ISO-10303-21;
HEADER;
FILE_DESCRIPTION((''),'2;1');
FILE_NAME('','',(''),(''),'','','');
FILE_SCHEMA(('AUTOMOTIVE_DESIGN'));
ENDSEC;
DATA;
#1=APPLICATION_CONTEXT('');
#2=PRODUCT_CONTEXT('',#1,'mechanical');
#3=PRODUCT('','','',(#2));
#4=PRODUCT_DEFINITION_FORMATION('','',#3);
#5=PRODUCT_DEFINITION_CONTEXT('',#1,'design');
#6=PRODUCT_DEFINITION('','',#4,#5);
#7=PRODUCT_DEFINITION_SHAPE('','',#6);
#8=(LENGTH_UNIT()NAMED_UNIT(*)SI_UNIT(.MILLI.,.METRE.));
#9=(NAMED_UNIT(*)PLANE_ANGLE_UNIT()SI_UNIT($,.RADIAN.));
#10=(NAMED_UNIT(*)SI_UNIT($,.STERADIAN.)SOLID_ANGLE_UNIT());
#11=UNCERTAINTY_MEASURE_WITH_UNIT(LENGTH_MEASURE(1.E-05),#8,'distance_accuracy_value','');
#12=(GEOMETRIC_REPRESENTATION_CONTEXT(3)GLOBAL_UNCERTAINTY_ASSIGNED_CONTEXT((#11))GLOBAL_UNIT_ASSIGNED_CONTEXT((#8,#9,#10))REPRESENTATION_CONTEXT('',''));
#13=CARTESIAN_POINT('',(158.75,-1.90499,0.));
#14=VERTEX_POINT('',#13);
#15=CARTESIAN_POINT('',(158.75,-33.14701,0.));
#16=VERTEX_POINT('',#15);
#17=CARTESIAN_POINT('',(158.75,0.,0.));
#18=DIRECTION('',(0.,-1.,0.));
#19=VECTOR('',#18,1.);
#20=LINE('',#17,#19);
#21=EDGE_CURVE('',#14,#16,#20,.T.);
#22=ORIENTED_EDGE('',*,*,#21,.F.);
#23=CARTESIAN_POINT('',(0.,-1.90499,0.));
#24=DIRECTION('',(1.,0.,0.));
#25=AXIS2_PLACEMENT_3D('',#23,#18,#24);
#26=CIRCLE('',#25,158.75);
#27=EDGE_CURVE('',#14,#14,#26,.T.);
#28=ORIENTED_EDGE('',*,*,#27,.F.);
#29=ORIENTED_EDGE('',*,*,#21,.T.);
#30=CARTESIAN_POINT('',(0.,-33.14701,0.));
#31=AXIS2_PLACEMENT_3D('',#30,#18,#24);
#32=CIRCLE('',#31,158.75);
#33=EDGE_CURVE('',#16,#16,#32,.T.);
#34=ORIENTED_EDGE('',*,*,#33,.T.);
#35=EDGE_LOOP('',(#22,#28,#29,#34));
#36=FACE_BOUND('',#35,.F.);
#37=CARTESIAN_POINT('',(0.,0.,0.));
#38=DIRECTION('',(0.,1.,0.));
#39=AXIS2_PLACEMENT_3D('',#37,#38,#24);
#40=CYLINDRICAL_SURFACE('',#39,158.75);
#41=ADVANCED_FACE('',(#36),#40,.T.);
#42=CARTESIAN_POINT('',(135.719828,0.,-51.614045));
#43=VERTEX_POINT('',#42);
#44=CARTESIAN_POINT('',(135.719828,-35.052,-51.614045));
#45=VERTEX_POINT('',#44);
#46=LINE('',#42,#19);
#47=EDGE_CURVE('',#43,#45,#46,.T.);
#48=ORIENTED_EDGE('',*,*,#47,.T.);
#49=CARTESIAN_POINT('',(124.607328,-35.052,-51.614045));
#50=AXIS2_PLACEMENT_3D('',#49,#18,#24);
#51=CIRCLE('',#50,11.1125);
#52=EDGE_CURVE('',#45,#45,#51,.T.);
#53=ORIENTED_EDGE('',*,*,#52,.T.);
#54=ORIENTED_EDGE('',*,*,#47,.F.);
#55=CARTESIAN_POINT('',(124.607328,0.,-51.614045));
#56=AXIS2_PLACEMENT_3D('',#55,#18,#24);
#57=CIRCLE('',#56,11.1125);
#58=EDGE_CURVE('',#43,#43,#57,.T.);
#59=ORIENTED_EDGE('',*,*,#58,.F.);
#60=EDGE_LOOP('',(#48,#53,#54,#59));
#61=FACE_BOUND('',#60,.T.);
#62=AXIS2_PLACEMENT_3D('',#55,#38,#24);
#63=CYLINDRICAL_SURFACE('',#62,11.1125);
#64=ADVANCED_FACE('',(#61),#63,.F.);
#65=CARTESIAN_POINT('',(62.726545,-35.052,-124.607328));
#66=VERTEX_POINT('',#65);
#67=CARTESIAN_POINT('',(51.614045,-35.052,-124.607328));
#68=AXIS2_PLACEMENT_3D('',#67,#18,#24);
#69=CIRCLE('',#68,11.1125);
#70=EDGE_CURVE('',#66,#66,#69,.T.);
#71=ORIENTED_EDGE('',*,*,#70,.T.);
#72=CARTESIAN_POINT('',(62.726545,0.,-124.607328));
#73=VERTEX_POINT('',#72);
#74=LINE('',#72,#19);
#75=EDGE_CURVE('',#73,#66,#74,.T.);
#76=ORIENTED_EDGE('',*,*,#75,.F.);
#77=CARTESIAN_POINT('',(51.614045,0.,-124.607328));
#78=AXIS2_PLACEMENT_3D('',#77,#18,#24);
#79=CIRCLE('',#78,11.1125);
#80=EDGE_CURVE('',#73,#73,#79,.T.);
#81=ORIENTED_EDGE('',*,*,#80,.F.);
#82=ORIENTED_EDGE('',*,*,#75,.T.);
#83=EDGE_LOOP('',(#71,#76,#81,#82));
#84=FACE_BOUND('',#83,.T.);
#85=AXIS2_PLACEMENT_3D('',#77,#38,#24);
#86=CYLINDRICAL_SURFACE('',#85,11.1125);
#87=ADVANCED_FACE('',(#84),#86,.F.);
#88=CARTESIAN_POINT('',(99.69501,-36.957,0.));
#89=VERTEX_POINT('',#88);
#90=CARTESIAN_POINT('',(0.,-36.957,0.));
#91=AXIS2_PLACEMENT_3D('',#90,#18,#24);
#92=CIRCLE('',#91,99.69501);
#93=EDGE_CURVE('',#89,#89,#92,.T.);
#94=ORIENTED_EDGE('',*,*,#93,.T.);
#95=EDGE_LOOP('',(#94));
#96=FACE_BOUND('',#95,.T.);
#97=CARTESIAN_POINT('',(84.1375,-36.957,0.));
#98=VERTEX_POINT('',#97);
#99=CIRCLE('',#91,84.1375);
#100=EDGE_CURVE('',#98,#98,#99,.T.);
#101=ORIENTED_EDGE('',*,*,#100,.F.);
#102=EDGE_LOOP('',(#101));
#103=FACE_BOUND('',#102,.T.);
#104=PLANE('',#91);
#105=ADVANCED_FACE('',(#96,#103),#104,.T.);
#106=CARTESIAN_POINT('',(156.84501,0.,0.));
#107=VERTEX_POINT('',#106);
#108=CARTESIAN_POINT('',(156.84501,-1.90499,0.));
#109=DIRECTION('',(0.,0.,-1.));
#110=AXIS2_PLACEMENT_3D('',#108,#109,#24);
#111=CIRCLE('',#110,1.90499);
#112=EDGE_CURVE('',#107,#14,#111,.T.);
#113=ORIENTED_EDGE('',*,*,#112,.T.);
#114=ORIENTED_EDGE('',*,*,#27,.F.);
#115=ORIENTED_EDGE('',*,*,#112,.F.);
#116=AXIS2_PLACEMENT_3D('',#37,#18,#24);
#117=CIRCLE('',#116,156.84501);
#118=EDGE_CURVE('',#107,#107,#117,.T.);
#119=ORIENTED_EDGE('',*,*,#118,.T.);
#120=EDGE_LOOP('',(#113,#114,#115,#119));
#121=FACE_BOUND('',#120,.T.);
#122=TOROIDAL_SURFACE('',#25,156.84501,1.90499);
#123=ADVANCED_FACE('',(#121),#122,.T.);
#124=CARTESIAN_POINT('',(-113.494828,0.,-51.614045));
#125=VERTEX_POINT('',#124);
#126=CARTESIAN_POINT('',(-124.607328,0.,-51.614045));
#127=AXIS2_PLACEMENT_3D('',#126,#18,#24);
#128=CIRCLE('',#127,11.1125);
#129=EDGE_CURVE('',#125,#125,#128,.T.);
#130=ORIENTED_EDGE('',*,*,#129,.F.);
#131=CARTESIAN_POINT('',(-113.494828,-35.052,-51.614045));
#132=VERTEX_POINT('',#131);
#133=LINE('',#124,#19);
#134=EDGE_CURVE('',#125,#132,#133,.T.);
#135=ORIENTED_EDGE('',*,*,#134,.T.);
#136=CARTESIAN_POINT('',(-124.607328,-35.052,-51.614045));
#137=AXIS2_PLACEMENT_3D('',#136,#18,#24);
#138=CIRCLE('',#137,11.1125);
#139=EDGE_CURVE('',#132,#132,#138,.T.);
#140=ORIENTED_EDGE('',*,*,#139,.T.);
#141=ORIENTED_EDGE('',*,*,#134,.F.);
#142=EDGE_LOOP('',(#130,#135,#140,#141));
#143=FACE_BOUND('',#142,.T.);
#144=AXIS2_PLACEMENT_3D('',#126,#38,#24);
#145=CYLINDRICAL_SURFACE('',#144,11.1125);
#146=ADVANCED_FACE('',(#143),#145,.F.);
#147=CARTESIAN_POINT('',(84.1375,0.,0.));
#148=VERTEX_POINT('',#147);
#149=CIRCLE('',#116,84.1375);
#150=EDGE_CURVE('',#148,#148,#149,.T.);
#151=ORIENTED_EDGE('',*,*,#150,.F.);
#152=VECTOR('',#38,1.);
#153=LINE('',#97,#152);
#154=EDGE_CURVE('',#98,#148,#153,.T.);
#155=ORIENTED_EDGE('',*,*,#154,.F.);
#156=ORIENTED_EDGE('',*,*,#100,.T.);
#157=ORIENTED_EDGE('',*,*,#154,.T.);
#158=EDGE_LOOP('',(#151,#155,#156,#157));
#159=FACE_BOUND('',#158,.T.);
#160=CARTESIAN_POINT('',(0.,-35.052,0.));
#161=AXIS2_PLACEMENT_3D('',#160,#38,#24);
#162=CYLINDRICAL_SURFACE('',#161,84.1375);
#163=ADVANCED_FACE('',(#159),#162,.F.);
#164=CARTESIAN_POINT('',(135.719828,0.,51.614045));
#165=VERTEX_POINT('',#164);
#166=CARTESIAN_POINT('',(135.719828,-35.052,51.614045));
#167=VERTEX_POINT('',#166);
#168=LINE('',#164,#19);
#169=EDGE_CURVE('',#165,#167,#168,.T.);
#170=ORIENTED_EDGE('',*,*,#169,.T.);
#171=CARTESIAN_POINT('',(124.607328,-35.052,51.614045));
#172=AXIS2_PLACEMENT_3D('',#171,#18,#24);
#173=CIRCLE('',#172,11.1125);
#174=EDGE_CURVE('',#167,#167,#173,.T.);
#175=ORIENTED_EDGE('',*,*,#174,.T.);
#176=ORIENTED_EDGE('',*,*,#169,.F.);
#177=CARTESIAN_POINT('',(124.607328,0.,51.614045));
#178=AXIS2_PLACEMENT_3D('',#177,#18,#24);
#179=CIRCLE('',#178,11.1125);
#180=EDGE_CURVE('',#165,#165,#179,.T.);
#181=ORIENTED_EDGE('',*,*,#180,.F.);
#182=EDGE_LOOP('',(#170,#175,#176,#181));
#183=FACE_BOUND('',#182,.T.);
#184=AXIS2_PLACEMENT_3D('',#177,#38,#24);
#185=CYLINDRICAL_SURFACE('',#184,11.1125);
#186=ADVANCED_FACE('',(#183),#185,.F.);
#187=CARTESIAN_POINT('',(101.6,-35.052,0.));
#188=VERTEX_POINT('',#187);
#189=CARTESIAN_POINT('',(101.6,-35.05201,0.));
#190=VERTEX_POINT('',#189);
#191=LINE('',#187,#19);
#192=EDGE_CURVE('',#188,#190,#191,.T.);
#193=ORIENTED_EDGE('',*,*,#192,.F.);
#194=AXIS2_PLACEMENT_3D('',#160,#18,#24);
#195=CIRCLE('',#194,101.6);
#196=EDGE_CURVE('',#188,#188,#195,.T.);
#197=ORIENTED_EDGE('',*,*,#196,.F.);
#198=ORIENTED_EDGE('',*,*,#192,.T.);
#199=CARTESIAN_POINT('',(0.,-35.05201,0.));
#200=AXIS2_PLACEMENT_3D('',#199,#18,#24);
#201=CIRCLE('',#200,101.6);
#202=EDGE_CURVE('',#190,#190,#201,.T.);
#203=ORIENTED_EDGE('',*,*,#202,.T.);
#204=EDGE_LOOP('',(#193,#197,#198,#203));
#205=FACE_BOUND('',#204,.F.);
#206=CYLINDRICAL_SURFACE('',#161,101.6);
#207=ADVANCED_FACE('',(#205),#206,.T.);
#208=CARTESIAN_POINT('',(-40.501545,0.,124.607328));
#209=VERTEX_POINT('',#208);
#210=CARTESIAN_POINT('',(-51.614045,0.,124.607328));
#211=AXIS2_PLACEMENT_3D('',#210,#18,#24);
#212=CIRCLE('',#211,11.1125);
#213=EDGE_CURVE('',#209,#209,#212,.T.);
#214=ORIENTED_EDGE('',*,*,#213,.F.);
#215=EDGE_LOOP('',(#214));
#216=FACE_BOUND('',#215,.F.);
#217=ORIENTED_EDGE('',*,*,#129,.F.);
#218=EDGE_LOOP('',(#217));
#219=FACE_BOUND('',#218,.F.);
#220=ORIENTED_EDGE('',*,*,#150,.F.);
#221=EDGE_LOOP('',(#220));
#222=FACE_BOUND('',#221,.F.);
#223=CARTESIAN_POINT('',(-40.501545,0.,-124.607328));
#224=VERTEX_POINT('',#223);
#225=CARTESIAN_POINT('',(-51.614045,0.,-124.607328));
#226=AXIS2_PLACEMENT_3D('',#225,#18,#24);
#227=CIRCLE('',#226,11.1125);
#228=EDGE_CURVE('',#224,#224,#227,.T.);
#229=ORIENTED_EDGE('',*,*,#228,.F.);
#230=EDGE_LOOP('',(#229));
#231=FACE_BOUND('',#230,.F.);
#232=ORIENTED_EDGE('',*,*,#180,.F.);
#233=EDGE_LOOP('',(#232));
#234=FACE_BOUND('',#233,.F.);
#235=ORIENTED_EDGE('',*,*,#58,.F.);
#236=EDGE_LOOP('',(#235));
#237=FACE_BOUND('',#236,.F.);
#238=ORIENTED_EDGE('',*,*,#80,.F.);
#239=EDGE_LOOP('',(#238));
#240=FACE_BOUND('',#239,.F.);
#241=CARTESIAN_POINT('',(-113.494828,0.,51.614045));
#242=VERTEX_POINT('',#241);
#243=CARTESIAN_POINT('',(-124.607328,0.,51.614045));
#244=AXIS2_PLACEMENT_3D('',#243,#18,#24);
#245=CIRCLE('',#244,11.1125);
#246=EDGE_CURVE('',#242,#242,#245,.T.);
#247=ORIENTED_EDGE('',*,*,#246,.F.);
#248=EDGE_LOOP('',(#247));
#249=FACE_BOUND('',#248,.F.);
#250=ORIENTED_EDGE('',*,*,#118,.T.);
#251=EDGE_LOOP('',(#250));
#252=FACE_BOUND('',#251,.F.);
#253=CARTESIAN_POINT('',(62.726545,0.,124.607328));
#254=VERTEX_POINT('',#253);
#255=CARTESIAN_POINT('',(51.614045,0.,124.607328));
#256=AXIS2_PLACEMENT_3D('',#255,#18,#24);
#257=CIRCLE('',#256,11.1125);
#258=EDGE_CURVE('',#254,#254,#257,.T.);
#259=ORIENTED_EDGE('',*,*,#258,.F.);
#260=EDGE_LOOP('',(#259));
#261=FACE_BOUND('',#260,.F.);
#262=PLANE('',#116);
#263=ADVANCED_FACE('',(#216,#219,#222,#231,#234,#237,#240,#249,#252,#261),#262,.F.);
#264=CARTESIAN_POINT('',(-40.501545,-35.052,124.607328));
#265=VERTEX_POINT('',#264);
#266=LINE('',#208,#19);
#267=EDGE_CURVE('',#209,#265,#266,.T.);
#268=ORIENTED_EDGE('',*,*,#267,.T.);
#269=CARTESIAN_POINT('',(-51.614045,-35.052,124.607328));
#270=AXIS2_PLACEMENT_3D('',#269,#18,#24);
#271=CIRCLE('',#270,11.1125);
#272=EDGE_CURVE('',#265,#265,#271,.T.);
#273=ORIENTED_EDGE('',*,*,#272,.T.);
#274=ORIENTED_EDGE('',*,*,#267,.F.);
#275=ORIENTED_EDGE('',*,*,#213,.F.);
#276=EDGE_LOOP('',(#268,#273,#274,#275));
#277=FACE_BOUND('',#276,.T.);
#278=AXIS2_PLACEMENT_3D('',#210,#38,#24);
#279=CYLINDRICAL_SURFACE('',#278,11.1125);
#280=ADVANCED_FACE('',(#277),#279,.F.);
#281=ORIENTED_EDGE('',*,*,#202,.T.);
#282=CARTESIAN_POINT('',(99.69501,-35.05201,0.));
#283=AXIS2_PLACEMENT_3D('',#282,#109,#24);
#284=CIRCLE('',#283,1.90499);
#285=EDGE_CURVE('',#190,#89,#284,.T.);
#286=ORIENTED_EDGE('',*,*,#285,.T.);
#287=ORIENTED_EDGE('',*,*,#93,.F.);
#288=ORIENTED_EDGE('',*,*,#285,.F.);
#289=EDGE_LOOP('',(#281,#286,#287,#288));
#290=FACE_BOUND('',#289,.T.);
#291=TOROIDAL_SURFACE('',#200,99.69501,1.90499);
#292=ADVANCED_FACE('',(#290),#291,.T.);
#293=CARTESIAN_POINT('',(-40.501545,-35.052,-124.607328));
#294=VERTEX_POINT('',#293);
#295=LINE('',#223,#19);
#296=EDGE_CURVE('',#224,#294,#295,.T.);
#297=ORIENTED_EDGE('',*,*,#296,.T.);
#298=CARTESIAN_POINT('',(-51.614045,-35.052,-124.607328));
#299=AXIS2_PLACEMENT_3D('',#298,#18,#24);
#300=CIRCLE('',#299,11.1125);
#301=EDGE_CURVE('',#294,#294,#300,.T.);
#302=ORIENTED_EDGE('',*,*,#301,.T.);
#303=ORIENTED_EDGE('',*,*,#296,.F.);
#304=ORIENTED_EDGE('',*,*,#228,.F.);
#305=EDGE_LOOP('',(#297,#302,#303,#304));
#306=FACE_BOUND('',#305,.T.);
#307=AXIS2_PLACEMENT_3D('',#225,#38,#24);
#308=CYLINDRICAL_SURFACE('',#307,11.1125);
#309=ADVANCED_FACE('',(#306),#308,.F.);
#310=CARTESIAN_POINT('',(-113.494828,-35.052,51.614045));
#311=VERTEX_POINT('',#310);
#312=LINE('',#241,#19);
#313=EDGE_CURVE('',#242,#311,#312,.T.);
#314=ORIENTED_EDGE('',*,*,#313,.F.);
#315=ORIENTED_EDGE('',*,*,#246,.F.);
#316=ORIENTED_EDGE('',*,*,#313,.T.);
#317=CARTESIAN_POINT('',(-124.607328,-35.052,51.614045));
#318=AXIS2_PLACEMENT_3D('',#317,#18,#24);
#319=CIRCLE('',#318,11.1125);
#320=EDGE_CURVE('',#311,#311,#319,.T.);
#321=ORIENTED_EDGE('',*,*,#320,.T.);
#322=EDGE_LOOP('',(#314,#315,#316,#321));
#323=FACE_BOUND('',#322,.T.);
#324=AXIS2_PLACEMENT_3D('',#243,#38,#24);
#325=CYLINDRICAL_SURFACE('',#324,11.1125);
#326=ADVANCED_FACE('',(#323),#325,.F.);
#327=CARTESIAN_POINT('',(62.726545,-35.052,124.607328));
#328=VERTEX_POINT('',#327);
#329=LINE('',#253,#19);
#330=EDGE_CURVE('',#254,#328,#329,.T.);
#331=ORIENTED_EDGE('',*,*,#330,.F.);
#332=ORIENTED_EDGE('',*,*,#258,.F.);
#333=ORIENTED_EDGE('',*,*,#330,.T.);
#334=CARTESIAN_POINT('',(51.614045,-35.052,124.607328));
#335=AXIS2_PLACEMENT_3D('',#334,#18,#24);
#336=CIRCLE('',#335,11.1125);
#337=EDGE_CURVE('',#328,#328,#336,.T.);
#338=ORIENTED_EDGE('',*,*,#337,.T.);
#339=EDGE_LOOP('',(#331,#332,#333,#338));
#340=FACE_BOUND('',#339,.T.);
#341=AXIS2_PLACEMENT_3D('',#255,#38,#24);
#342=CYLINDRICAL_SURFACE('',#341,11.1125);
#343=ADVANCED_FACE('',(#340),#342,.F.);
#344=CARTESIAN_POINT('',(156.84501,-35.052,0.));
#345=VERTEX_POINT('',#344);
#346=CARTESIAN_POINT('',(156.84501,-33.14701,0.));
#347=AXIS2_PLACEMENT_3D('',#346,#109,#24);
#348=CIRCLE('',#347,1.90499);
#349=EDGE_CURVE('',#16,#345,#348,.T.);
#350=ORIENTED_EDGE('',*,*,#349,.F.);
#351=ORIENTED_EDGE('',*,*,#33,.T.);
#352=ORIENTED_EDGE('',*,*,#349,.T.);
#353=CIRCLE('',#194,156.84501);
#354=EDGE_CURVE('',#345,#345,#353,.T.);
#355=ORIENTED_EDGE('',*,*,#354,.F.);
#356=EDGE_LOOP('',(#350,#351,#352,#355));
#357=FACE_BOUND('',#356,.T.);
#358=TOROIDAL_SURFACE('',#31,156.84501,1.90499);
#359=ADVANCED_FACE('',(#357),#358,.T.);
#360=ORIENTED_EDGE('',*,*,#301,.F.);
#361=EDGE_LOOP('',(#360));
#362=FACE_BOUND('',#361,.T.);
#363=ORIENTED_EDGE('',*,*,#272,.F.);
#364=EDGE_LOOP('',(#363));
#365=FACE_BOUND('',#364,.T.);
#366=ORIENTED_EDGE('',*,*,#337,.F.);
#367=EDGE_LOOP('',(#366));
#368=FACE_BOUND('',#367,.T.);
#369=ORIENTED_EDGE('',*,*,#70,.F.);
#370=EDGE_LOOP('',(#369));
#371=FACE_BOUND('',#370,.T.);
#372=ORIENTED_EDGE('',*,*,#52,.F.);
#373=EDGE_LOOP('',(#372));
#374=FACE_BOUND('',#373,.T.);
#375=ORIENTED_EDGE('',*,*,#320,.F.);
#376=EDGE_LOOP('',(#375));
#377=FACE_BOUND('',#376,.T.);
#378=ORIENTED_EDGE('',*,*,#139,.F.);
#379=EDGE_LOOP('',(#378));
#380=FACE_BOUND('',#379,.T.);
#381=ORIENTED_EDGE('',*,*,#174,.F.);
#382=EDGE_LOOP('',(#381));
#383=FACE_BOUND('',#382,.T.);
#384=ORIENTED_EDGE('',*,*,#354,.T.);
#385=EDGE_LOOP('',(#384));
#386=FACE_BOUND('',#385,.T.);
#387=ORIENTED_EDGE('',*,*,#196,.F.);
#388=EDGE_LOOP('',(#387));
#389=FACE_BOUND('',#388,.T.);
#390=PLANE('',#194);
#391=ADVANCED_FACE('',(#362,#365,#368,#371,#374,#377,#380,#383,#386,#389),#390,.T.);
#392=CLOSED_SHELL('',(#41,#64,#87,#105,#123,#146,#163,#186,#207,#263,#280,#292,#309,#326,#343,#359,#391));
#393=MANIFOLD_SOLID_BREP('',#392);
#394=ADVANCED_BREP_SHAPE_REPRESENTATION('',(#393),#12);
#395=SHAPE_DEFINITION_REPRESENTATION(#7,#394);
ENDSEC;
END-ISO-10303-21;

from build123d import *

# Parameters (mm, degrees)
F0_R     = 158.75
F0_R_2   = 11.1125
F0_R_3   = 84.1375
F1_DEPTH = 35.052
F2_R     = 101.6
F2_R_2   = 84.1375
F3_DEPTH = 1.905
F4_R     = 1.90499


# Not quite as in the source:
# - a fillet or chamfer is up to 0.001 mm smaller than in the source, because OpenCascade refuses the exact size


with BuildPart() as f1:
    # F0 (on Front) → F1 (new body)
    with BuildSketch(Plane.XZ):
        Circle(F0_R)
        with Locations((-51.6140452568, -124.6073280679)):
            Circle(F0_R_2, mode=Mode.SUBTRACT)
        with Locations((-124.6073280679, -51.6140452568)):
            Circle(F0_R_2, mode=Mode.SUBTRACT)
        with Locations((51.6140452568, -124.6073280679)):
            Circle(F0_R_2, mode=Mode.SUBTRACT)
        with Locations((124.6073280679, -51.6140452568)):
            Circle(F0_R_2, mode=Mode.SUBTRACT)
        with Locations((-124.6073280679, 51.6140452568)):
            Circle(F0_R_2, mode=Mode.SUBTRACT)
        with Locations((-51.6140452568, 124.6073280679)):
            Circle(F0_R_2, mode=Mode.SUBTRACT)
        Circle(F0_R_3, mode=Mode.SUBTRACT)
        with Locations((124.6073280679, 51.6140452568)):
            Circle(F0_R_2, mode=Mode.SUBTRACT)
        with Locations((51.6140452568, 124.6073280679)):
            Circle(F0_R_2, mode=Mode.SUBTRACT)
    extrude(amount=F1_DEPTH)

    # F2 (on face) → F3 (join)
    with BuildSketch(Plane.XZ.offset(35.052)):
        Circle(F2_R)
        Circle(F2_R_2, mode=Mode.SUBTRACT)
    extrude(amount=F3_DEPTH)

    # F4 (radius 1.905 in the source; OpenCascade refuses exactly that, so slightly less here)
    f4_edges = [f1.edges().sort_by_distance(p)[0] for p in [
        (-158.75, -35.052, 0),
        (-158.75, 0, 0),
        (-101.6, -36.957, 0),
    ]]
    fillet(f4_edges, radius=F4_R)


solid = f1.part
